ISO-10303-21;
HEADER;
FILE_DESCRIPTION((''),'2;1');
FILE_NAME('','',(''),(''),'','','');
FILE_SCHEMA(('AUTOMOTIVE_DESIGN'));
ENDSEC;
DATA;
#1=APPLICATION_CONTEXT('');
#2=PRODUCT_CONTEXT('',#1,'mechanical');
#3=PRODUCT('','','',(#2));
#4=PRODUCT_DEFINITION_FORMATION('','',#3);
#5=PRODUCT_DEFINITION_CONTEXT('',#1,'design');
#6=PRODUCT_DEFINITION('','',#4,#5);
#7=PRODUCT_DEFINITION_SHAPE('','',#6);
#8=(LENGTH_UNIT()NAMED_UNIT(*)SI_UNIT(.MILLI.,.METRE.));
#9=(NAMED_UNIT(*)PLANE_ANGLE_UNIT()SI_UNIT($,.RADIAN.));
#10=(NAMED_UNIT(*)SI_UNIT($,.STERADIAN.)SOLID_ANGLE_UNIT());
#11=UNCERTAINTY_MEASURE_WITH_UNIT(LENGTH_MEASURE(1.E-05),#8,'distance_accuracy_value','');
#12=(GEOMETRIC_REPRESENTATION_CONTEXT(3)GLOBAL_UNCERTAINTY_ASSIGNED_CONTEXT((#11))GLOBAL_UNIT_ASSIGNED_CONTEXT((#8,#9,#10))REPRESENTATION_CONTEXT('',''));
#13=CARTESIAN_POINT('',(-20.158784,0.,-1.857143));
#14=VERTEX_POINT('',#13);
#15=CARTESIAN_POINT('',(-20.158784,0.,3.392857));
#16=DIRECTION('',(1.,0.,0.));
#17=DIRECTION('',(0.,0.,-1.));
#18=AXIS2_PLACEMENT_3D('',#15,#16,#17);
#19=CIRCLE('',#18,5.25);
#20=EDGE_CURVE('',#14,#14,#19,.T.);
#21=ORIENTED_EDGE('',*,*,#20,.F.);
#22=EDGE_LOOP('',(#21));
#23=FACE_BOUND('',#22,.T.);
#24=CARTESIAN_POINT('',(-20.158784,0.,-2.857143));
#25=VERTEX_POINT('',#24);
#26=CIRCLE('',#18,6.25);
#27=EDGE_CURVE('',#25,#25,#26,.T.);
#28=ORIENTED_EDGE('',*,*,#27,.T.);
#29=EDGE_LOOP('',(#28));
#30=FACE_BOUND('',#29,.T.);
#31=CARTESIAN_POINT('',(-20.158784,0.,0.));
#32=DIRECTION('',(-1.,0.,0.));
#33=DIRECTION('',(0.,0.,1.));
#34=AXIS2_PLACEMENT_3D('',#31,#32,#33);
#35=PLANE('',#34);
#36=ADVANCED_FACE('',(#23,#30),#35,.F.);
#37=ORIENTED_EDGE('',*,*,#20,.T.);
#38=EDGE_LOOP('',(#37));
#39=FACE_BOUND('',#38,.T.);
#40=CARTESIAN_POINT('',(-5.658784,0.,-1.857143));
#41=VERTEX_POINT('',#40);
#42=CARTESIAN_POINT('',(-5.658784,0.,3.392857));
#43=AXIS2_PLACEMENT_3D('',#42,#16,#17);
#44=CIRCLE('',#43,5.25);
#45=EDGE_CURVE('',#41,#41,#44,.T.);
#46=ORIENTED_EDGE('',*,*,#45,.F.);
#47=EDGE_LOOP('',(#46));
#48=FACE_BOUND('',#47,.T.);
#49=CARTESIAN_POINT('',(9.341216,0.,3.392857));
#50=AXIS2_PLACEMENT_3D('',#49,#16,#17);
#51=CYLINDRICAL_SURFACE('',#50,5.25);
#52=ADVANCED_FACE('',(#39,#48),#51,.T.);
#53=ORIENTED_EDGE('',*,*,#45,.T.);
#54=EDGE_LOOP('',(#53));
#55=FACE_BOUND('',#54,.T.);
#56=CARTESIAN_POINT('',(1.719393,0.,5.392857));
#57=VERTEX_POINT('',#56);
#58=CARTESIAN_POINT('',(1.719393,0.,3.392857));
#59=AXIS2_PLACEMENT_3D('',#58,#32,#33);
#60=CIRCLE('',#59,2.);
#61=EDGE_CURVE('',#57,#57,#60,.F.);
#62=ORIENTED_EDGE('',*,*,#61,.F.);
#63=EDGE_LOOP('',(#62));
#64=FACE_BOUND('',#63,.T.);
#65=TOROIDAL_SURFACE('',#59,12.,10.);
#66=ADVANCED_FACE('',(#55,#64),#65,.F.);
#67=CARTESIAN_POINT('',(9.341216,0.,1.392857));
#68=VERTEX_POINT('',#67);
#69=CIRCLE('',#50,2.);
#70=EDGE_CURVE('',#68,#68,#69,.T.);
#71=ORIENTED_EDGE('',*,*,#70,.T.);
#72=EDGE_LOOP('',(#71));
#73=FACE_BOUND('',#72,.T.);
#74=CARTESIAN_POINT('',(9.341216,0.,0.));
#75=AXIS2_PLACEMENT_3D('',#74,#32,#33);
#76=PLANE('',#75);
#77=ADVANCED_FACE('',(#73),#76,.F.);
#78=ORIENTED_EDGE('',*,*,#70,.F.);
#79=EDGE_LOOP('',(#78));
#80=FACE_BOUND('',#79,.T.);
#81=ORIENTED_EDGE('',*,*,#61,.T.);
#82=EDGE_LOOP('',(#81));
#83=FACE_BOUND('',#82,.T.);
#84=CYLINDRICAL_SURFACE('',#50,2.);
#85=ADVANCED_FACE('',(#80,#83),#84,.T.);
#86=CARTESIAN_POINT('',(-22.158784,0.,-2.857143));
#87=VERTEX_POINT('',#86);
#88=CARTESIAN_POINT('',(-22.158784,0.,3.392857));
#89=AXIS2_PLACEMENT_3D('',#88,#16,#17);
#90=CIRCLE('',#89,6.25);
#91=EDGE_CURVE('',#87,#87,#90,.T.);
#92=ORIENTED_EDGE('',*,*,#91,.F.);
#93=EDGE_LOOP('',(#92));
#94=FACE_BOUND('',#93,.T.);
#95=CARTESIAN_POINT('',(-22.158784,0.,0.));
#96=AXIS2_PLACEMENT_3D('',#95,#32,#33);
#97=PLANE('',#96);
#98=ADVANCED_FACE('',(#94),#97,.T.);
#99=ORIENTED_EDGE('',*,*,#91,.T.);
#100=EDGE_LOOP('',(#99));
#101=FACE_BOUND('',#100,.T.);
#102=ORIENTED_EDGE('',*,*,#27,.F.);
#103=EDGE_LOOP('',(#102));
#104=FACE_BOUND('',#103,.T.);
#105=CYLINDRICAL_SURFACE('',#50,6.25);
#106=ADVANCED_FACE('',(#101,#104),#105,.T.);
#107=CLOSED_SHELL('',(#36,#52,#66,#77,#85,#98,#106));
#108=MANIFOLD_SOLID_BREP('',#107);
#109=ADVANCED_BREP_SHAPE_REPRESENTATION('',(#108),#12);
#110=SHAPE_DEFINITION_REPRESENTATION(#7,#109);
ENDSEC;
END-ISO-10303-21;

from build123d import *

# Parameters (mm, degrees)
SKETCH_1_W = 15
SKETCH_1_H = 2
FILLET_1_R = 10


with BuildPart() as part:
    # 草图1 → 旋转1 (revolve)
    with BuildSketch(Plane(origin=(0, 0, 0), x_dir=(1, 0, 0), z_dir=(0, 1, 0))):
        Polygon((-22.158783784, -3.392857143), (-20.158783784, -3.392857143), (-20.158783784, 1.857142857), (-20.158783784, 2.857142857), (-22.158783784, 2.857142857), align=None)
        Polygon((-20.158783784, -3.392857143), (-5.658783784, -3.392857143), (-5.658783784, -1.392857143), (-5.658783784, 1.857142857), (-20.158783784, 1.857142857), align=None)
        with Locations((1.841216216, -2.392857143)):
            Rectangle(SKETCH_1_W, SKETCH_1_H)
    revolve(axis=Axis((9.341216216, 0, 3.392857143), (-1, 0, 0)))

    # 圆角1
    # the kernel refuses this fillet: 10 mm, written as the material it adds along each edge
    with BuildSketch(Plane(origin=(-5.658783784, 0, 3.392857143), x_dir=(0, 0, -1), z_dir=(0, 1, 0))) as fillet_1_piece_1:
        with BuildLine():
            CenterArc((12, -7.378177282), FILLET_1_R, 132.454150204, 47.545849796)
            Line((2, -7.378177282), (1.8, -7.378177282))
            Line((1.8, -7.378177282), (1.8, 0))
            Line((1.8, 0), (2, 0.2))
            ThreePointArc((2, 0.2), (3.625, 0.2), (5.115, 0.147563546))
            Line((5.115, 0.147563546), (5.25, 0))
        make_face()
    revolve(axis=Axis((-5.658783784, 0, 3.392857143), (-1, 0, 0)))


solid = part.part
